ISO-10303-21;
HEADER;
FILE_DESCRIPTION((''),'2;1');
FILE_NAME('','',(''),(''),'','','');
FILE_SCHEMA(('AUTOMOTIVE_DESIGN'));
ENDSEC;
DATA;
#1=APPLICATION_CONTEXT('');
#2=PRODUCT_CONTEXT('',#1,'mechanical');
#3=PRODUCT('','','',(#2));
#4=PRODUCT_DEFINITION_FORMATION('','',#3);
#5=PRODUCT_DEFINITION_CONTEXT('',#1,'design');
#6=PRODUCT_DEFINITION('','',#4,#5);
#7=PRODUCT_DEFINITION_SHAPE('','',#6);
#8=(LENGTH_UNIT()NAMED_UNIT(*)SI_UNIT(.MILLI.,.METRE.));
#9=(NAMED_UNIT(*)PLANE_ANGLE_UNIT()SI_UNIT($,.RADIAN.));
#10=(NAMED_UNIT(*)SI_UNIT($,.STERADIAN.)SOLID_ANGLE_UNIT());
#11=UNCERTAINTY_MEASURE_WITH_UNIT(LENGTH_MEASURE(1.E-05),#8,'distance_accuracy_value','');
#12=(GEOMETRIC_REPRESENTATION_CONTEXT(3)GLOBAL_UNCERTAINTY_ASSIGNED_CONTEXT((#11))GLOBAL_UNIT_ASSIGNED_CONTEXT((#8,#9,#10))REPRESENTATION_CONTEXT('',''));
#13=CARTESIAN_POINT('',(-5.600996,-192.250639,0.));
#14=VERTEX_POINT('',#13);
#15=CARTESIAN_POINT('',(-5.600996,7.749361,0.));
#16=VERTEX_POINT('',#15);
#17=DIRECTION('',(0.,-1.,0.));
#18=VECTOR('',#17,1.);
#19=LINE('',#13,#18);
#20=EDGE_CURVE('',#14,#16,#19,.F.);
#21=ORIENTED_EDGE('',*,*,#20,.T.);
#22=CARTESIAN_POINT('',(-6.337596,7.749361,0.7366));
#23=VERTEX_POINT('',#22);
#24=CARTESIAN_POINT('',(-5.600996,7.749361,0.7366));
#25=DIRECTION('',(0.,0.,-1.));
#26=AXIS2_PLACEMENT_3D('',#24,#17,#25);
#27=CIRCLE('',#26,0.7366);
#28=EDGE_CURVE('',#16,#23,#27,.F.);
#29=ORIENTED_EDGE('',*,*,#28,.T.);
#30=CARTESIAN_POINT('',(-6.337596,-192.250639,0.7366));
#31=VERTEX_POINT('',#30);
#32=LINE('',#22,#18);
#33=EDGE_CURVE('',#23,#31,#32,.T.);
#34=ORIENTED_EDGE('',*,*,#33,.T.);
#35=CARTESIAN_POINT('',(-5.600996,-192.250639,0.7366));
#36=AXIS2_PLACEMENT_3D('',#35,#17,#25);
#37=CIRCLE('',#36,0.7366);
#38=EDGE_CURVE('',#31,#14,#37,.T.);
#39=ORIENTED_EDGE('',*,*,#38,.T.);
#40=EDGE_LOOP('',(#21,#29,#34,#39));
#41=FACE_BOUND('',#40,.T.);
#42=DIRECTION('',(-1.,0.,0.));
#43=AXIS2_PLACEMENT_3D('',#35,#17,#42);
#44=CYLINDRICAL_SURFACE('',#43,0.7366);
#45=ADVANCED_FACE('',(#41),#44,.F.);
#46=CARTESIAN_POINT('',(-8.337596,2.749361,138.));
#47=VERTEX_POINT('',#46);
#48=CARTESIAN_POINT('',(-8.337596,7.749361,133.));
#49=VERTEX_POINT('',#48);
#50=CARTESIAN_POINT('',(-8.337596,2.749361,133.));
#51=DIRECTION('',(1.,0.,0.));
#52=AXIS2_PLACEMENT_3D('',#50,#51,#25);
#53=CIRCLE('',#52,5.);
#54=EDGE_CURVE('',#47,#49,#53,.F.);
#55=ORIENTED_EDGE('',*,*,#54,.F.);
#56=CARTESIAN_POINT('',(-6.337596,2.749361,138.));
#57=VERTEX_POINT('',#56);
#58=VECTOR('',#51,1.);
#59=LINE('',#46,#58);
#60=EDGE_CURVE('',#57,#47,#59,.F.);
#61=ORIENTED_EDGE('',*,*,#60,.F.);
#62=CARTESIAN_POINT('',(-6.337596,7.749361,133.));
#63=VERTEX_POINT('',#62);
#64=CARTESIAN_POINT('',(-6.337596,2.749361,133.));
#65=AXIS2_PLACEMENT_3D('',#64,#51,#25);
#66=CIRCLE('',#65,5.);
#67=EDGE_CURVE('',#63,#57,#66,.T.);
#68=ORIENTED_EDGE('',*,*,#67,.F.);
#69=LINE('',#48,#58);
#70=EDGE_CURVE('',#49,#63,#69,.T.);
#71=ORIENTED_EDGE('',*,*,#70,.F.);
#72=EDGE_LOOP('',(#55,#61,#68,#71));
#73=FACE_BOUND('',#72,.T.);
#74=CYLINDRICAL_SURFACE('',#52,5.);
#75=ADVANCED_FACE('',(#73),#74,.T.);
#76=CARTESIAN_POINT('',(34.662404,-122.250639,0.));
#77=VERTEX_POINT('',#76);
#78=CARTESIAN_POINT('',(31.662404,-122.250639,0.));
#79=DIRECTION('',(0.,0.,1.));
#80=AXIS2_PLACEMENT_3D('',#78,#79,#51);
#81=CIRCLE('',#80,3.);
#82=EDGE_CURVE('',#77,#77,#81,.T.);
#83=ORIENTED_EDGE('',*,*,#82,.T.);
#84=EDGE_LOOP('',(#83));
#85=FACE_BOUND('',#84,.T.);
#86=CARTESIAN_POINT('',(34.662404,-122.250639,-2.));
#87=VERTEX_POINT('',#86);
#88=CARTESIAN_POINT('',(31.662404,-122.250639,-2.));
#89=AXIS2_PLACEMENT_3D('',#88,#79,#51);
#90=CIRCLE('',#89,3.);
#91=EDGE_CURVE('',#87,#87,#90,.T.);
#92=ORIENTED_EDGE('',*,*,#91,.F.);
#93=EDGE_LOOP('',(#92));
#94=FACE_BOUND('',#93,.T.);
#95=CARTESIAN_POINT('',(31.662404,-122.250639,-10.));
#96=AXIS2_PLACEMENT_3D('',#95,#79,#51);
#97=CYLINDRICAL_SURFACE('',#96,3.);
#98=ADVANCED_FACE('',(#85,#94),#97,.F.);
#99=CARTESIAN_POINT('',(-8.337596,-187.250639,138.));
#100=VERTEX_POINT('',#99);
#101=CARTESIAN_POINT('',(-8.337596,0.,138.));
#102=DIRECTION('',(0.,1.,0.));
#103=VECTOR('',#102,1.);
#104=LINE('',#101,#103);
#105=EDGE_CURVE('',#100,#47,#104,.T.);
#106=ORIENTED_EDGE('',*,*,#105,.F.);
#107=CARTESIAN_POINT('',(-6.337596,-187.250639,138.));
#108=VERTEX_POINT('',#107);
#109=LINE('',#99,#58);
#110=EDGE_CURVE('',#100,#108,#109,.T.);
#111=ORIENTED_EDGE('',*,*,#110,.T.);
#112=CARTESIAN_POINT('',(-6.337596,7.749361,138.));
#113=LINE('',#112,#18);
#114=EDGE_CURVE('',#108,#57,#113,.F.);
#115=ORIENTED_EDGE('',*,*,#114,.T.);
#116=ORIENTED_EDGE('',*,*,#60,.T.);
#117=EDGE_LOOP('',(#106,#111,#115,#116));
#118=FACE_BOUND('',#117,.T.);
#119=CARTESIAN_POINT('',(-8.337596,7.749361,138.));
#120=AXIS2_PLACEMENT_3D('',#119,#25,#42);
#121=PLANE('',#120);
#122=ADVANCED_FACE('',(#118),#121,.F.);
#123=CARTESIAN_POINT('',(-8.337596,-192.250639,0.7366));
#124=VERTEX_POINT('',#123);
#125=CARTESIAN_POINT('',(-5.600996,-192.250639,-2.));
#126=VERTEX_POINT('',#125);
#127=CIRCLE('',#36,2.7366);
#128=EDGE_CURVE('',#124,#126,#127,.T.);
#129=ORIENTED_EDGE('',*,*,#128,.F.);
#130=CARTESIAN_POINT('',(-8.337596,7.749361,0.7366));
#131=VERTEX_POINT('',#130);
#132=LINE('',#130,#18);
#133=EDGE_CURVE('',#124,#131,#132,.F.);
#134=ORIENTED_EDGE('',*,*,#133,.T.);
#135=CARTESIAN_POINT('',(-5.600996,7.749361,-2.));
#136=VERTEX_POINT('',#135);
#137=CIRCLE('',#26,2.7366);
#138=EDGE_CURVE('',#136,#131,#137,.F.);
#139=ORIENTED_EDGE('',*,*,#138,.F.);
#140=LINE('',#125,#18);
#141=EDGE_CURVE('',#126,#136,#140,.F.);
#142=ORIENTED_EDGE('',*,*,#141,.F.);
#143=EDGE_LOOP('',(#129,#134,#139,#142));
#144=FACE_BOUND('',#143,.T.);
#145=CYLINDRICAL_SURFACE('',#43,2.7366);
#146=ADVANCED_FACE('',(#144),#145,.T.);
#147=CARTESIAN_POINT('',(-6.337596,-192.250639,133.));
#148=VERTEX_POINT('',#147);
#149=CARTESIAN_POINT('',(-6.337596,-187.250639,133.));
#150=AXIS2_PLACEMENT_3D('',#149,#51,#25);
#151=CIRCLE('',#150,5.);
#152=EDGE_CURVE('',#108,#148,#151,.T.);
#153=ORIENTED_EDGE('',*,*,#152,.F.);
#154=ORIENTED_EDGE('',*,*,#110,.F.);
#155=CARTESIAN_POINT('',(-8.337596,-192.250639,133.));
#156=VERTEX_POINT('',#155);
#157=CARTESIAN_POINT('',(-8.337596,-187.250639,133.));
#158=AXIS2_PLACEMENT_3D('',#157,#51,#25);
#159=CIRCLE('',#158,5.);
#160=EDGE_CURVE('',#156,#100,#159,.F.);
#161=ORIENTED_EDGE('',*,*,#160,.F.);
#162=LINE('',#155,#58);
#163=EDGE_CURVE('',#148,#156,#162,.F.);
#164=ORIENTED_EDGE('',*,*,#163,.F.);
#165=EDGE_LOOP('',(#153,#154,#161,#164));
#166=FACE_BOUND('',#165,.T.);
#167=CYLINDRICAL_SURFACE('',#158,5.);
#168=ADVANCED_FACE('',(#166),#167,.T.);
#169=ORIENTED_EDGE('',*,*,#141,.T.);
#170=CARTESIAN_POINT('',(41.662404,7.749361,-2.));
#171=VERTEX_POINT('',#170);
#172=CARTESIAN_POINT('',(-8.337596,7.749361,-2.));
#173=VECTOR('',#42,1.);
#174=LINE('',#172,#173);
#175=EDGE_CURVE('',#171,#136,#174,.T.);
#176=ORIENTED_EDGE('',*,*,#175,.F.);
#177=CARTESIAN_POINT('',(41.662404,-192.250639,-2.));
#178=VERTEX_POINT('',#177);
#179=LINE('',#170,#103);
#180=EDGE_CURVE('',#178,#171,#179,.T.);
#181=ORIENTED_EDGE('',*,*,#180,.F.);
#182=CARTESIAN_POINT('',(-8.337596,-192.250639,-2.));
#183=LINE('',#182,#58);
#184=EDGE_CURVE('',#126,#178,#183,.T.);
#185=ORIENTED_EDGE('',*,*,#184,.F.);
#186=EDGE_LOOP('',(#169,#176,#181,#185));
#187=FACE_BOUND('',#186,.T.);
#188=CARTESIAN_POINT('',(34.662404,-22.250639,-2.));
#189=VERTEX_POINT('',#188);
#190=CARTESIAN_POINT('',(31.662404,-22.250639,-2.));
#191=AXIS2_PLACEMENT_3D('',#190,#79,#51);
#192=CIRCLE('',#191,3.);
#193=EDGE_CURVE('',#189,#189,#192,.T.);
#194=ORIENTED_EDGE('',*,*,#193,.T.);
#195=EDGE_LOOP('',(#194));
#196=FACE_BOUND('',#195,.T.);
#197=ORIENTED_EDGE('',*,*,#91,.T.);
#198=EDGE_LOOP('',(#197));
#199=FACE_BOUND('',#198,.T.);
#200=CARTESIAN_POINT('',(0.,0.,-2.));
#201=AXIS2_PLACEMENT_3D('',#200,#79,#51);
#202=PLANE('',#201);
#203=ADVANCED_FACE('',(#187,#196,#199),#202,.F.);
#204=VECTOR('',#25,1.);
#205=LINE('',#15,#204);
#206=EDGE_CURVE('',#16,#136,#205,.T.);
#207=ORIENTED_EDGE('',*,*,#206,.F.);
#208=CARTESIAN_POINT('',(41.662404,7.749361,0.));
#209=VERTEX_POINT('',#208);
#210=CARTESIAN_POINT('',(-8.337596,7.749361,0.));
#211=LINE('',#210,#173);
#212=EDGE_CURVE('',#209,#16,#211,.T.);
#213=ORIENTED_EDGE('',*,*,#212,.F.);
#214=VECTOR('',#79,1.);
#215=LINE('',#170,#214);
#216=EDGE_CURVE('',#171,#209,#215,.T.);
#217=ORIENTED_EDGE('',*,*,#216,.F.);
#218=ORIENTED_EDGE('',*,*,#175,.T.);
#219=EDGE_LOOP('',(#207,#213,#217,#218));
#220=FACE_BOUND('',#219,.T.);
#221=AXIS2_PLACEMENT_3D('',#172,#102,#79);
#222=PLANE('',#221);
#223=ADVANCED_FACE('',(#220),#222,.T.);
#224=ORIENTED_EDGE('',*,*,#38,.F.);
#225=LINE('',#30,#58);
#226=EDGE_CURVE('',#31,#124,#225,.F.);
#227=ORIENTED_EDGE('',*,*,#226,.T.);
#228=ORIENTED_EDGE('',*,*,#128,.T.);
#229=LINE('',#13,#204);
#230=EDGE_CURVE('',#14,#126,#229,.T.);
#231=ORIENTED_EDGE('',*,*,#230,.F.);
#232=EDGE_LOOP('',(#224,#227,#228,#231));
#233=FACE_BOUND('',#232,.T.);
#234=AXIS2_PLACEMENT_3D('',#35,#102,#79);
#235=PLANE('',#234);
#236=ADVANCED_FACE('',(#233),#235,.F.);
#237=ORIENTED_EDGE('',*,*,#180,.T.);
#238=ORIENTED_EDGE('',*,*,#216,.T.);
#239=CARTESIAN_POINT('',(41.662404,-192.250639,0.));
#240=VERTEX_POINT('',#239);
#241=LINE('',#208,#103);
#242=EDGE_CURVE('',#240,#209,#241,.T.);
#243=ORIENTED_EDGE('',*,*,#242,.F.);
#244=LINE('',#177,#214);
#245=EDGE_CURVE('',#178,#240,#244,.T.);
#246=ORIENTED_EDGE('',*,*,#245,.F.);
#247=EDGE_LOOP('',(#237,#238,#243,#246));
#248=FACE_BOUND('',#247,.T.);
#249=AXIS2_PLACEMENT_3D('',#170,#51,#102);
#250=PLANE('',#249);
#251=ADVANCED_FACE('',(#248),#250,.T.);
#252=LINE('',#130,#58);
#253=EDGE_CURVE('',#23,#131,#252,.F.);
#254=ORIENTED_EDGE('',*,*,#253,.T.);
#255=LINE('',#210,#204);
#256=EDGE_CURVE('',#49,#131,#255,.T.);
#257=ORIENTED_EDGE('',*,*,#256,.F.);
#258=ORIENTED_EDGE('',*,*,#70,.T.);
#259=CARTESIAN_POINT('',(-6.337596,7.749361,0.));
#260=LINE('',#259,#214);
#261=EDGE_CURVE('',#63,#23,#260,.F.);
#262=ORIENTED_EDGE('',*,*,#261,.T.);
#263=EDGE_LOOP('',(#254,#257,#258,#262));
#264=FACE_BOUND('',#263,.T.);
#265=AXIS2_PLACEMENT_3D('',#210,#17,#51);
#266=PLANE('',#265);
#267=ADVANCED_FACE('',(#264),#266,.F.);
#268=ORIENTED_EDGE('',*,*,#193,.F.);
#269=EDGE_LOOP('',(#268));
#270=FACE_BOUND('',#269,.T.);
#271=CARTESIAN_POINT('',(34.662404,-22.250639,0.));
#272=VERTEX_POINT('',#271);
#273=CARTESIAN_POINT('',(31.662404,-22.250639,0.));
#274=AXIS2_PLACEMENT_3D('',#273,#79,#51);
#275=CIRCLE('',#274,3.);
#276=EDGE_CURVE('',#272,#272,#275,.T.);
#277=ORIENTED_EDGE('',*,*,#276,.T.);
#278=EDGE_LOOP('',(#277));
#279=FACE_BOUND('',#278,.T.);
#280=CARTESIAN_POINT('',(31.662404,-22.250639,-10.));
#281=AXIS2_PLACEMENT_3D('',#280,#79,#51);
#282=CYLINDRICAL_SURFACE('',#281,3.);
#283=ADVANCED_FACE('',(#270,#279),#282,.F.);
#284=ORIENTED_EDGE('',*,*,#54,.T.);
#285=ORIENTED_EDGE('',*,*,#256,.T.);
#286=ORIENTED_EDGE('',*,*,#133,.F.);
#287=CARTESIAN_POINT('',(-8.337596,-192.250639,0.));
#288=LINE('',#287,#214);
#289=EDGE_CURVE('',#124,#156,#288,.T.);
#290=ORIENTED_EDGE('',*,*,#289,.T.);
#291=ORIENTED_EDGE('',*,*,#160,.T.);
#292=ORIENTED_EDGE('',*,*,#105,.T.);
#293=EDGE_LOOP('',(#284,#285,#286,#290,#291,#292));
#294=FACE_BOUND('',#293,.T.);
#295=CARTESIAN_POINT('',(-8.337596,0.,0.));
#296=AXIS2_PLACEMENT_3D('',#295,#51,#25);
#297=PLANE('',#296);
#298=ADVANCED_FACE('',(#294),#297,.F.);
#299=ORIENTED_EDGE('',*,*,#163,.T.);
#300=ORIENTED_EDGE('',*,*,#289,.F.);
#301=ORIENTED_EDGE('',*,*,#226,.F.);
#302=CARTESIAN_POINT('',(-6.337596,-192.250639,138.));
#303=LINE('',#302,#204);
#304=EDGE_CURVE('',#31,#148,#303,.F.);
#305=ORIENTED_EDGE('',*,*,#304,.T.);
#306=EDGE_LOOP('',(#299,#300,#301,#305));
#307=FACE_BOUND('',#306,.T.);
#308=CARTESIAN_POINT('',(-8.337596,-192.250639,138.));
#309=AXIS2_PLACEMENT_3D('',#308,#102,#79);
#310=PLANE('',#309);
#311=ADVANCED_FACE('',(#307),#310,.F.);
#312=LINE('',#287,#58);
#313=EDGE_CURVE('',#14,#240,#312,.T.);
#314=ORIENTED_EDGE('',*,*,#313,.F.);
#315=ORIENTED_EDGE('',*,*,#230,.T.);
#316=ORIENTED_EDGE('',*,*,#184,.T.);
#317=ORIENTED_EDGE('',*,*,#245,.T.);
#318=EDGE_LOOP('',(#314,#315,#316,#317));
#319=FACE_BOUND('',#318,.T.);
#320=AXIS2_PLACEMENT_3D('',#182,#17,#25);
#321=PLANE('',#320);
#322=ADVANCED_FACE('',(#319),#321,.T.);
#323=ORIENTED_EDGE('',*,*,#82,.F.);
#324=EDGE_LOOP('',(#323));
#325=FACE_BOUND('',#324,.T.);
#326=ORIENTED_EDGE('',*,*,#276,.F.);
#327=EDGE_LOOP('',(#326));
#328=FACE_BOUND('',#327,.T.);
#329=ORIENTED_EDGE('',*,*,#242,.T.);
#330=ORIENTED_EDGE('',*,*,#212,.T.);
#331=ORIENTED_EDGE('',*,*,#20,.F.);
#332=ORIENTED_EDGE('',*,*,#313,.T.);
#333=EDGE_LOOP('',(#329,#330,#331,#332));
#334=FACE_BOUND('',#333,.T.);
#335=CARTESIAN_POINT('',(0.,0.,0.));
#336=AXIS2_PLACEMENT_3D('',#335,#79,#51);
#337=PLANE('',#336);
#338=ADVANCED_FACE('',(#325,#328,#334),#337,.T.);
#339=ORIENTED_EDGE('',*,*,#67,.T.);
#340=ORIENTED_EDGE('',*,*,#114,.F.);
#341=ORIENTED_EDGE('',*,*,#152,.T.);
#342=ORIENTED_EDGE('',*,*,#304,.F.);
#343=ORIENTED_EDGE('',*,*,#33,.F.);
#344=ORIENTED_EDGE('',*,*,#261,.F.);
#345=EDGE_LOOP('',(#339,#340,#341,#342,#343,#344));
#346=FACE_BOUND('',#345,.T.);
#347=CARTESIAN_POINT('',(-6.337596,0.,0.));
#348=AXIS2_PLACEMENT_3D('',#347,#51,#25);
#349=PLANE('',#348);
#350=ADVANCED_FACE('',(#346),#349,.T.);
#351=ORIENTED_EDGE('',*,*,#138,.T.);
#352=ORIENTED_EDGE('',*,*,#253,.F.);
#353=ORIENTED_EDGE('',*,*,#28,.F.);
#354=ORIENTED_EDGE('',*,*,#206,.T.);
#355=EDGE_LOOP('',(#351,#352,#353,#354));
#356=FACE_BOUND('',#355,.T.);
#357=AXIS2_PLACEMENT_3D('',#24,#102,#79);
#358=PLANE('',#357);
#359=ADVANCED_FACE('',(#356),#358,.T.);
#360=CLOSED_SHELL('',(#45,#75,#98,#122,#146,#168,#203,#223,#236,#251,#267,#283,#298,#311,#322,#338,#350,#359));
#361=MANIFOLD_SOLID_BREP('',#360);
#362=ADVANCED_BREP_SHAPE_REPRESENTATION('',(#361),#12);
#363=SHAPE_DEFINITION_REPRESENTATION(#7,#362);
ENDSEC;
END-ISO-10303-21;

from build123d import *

# Parameters (mm, degrees)
SKETCH_1_W                       = 50
SKETCH_1_H                       = 200
SM_BASE_FLANGE_1_DEPTH           = 2
SM_EDGE_FLANGE_1_STRIP_W         = 9.4732
SM_EDGE_FLANGE_1_STRIP_H         = 2
SM_EDGE_FLANGE_1_STRIP_CUT_DEPTH = 200
SM_EDGE_FLANGE_1_DEPTH           = 200
SKETCH_8_R                       = 3
CUT_EXTRUDE_1_DEPTH              = 10
PATTERN_LINEAR_1_COUNT           = 2
PATTERN_LINEAR_1_PITCH           = 100
FILLET_2_R                       = 5
FILLET_3_R                       = 5


# Sheet-metal steps are written as plain solids
with BuildPart() as part:
    # Sketch 1 → 基体-法兰1 (new body)
    with BuildSketch(Plane.XY):
        with Locations((16.662404092, -92.250639386)):
            Rectangle(SKETCH_1_W, SKETCH_1_H)
    extrude(amount=-SM_BASE_FLANGE_1_DEPTH)

    # 边线-法兰1 strip (across the edge) → 边线-法兰1 strip cut (cut)
    with BuildSketch(Plane(origin=(-8.337595908, 7.749360614, 0), x_dir=(1, 0, 0), z_dir=(0, -1, 0))):
        with Locations((-2, -1)):
            Rectangle(SM_EDGE_FLANGE_1_STRIP_W, SM_EDGE_FLANGE_1_STRIP_H)
    extrude(amount=SM_EDGE_FLANGE_1_STRIP_CUT_DEPTH, mode=Mode.SUBTRACT)

    # 边线-法兰1 section (across the edge) → 边线-法兰1 (add)
    with BuildSketch(Plane(origin=(-8.337595908, 7.749360614, 0), x_dir=(1, 0, 0), z_dir=(0, -1, 0))):
        with BuildLine():
            Line((0, 0.7366), (0, 138))
            Line((0, 138), (2, 138))
            Line((2, 138), (2, 0.7366))
            ThreePointArc((2, 0.7366), (2.215745145, 0.215745145), (2.7366, 0))
            Line((2.7366, 0), (2.7366, -2))
            ThreePointArc((2.7366, -2), (0.801531583, -1.198468417), (0, 0.7366))
        make_face()
    extrude(amount=SM_EDGE_FLANGE_1_DEPTH)

    # 草图8 → 切除-拉伸1 (cut)
    with BuildSketch(Plane.XY):
        with Locations((31.662404092, -22.250639386)):
            Circle(SKETCH_8_R)
    cut_extrude_1 = extrude(amount=-CUT_EXTRUDE_1_DEPTH, mode=Mode.SUBTRACT)

    # 阵列(线性)1: 切除-拉伸1 ×2
    with Locations(*[(0, -i * PATTERN_LINEAR_1_PITCH, 0) for i in range(1, PATTERN_LINEAR_1_COUNT)]):
        add(cut_extrude_1, mode=Mode.SUBTRACT)

    # 圆角2
    fillet_2_edges = [part.edges().sort_by_distance(p)[0] for p in [
        (-7.337595908, 7.749360614, 138),
    ]]
    fillet(fillet_2_edges, radius=FILLET_2_R)

    # 圆角3
    fillet_3_edges = [part.edges().sort_by_distance(p)[0] for p in [
        (-7.337595908, -192.250639386, 138),
    ]]
    fillet(fillet_3_edges, radius=FILLET_3_R)


solid = part.part
